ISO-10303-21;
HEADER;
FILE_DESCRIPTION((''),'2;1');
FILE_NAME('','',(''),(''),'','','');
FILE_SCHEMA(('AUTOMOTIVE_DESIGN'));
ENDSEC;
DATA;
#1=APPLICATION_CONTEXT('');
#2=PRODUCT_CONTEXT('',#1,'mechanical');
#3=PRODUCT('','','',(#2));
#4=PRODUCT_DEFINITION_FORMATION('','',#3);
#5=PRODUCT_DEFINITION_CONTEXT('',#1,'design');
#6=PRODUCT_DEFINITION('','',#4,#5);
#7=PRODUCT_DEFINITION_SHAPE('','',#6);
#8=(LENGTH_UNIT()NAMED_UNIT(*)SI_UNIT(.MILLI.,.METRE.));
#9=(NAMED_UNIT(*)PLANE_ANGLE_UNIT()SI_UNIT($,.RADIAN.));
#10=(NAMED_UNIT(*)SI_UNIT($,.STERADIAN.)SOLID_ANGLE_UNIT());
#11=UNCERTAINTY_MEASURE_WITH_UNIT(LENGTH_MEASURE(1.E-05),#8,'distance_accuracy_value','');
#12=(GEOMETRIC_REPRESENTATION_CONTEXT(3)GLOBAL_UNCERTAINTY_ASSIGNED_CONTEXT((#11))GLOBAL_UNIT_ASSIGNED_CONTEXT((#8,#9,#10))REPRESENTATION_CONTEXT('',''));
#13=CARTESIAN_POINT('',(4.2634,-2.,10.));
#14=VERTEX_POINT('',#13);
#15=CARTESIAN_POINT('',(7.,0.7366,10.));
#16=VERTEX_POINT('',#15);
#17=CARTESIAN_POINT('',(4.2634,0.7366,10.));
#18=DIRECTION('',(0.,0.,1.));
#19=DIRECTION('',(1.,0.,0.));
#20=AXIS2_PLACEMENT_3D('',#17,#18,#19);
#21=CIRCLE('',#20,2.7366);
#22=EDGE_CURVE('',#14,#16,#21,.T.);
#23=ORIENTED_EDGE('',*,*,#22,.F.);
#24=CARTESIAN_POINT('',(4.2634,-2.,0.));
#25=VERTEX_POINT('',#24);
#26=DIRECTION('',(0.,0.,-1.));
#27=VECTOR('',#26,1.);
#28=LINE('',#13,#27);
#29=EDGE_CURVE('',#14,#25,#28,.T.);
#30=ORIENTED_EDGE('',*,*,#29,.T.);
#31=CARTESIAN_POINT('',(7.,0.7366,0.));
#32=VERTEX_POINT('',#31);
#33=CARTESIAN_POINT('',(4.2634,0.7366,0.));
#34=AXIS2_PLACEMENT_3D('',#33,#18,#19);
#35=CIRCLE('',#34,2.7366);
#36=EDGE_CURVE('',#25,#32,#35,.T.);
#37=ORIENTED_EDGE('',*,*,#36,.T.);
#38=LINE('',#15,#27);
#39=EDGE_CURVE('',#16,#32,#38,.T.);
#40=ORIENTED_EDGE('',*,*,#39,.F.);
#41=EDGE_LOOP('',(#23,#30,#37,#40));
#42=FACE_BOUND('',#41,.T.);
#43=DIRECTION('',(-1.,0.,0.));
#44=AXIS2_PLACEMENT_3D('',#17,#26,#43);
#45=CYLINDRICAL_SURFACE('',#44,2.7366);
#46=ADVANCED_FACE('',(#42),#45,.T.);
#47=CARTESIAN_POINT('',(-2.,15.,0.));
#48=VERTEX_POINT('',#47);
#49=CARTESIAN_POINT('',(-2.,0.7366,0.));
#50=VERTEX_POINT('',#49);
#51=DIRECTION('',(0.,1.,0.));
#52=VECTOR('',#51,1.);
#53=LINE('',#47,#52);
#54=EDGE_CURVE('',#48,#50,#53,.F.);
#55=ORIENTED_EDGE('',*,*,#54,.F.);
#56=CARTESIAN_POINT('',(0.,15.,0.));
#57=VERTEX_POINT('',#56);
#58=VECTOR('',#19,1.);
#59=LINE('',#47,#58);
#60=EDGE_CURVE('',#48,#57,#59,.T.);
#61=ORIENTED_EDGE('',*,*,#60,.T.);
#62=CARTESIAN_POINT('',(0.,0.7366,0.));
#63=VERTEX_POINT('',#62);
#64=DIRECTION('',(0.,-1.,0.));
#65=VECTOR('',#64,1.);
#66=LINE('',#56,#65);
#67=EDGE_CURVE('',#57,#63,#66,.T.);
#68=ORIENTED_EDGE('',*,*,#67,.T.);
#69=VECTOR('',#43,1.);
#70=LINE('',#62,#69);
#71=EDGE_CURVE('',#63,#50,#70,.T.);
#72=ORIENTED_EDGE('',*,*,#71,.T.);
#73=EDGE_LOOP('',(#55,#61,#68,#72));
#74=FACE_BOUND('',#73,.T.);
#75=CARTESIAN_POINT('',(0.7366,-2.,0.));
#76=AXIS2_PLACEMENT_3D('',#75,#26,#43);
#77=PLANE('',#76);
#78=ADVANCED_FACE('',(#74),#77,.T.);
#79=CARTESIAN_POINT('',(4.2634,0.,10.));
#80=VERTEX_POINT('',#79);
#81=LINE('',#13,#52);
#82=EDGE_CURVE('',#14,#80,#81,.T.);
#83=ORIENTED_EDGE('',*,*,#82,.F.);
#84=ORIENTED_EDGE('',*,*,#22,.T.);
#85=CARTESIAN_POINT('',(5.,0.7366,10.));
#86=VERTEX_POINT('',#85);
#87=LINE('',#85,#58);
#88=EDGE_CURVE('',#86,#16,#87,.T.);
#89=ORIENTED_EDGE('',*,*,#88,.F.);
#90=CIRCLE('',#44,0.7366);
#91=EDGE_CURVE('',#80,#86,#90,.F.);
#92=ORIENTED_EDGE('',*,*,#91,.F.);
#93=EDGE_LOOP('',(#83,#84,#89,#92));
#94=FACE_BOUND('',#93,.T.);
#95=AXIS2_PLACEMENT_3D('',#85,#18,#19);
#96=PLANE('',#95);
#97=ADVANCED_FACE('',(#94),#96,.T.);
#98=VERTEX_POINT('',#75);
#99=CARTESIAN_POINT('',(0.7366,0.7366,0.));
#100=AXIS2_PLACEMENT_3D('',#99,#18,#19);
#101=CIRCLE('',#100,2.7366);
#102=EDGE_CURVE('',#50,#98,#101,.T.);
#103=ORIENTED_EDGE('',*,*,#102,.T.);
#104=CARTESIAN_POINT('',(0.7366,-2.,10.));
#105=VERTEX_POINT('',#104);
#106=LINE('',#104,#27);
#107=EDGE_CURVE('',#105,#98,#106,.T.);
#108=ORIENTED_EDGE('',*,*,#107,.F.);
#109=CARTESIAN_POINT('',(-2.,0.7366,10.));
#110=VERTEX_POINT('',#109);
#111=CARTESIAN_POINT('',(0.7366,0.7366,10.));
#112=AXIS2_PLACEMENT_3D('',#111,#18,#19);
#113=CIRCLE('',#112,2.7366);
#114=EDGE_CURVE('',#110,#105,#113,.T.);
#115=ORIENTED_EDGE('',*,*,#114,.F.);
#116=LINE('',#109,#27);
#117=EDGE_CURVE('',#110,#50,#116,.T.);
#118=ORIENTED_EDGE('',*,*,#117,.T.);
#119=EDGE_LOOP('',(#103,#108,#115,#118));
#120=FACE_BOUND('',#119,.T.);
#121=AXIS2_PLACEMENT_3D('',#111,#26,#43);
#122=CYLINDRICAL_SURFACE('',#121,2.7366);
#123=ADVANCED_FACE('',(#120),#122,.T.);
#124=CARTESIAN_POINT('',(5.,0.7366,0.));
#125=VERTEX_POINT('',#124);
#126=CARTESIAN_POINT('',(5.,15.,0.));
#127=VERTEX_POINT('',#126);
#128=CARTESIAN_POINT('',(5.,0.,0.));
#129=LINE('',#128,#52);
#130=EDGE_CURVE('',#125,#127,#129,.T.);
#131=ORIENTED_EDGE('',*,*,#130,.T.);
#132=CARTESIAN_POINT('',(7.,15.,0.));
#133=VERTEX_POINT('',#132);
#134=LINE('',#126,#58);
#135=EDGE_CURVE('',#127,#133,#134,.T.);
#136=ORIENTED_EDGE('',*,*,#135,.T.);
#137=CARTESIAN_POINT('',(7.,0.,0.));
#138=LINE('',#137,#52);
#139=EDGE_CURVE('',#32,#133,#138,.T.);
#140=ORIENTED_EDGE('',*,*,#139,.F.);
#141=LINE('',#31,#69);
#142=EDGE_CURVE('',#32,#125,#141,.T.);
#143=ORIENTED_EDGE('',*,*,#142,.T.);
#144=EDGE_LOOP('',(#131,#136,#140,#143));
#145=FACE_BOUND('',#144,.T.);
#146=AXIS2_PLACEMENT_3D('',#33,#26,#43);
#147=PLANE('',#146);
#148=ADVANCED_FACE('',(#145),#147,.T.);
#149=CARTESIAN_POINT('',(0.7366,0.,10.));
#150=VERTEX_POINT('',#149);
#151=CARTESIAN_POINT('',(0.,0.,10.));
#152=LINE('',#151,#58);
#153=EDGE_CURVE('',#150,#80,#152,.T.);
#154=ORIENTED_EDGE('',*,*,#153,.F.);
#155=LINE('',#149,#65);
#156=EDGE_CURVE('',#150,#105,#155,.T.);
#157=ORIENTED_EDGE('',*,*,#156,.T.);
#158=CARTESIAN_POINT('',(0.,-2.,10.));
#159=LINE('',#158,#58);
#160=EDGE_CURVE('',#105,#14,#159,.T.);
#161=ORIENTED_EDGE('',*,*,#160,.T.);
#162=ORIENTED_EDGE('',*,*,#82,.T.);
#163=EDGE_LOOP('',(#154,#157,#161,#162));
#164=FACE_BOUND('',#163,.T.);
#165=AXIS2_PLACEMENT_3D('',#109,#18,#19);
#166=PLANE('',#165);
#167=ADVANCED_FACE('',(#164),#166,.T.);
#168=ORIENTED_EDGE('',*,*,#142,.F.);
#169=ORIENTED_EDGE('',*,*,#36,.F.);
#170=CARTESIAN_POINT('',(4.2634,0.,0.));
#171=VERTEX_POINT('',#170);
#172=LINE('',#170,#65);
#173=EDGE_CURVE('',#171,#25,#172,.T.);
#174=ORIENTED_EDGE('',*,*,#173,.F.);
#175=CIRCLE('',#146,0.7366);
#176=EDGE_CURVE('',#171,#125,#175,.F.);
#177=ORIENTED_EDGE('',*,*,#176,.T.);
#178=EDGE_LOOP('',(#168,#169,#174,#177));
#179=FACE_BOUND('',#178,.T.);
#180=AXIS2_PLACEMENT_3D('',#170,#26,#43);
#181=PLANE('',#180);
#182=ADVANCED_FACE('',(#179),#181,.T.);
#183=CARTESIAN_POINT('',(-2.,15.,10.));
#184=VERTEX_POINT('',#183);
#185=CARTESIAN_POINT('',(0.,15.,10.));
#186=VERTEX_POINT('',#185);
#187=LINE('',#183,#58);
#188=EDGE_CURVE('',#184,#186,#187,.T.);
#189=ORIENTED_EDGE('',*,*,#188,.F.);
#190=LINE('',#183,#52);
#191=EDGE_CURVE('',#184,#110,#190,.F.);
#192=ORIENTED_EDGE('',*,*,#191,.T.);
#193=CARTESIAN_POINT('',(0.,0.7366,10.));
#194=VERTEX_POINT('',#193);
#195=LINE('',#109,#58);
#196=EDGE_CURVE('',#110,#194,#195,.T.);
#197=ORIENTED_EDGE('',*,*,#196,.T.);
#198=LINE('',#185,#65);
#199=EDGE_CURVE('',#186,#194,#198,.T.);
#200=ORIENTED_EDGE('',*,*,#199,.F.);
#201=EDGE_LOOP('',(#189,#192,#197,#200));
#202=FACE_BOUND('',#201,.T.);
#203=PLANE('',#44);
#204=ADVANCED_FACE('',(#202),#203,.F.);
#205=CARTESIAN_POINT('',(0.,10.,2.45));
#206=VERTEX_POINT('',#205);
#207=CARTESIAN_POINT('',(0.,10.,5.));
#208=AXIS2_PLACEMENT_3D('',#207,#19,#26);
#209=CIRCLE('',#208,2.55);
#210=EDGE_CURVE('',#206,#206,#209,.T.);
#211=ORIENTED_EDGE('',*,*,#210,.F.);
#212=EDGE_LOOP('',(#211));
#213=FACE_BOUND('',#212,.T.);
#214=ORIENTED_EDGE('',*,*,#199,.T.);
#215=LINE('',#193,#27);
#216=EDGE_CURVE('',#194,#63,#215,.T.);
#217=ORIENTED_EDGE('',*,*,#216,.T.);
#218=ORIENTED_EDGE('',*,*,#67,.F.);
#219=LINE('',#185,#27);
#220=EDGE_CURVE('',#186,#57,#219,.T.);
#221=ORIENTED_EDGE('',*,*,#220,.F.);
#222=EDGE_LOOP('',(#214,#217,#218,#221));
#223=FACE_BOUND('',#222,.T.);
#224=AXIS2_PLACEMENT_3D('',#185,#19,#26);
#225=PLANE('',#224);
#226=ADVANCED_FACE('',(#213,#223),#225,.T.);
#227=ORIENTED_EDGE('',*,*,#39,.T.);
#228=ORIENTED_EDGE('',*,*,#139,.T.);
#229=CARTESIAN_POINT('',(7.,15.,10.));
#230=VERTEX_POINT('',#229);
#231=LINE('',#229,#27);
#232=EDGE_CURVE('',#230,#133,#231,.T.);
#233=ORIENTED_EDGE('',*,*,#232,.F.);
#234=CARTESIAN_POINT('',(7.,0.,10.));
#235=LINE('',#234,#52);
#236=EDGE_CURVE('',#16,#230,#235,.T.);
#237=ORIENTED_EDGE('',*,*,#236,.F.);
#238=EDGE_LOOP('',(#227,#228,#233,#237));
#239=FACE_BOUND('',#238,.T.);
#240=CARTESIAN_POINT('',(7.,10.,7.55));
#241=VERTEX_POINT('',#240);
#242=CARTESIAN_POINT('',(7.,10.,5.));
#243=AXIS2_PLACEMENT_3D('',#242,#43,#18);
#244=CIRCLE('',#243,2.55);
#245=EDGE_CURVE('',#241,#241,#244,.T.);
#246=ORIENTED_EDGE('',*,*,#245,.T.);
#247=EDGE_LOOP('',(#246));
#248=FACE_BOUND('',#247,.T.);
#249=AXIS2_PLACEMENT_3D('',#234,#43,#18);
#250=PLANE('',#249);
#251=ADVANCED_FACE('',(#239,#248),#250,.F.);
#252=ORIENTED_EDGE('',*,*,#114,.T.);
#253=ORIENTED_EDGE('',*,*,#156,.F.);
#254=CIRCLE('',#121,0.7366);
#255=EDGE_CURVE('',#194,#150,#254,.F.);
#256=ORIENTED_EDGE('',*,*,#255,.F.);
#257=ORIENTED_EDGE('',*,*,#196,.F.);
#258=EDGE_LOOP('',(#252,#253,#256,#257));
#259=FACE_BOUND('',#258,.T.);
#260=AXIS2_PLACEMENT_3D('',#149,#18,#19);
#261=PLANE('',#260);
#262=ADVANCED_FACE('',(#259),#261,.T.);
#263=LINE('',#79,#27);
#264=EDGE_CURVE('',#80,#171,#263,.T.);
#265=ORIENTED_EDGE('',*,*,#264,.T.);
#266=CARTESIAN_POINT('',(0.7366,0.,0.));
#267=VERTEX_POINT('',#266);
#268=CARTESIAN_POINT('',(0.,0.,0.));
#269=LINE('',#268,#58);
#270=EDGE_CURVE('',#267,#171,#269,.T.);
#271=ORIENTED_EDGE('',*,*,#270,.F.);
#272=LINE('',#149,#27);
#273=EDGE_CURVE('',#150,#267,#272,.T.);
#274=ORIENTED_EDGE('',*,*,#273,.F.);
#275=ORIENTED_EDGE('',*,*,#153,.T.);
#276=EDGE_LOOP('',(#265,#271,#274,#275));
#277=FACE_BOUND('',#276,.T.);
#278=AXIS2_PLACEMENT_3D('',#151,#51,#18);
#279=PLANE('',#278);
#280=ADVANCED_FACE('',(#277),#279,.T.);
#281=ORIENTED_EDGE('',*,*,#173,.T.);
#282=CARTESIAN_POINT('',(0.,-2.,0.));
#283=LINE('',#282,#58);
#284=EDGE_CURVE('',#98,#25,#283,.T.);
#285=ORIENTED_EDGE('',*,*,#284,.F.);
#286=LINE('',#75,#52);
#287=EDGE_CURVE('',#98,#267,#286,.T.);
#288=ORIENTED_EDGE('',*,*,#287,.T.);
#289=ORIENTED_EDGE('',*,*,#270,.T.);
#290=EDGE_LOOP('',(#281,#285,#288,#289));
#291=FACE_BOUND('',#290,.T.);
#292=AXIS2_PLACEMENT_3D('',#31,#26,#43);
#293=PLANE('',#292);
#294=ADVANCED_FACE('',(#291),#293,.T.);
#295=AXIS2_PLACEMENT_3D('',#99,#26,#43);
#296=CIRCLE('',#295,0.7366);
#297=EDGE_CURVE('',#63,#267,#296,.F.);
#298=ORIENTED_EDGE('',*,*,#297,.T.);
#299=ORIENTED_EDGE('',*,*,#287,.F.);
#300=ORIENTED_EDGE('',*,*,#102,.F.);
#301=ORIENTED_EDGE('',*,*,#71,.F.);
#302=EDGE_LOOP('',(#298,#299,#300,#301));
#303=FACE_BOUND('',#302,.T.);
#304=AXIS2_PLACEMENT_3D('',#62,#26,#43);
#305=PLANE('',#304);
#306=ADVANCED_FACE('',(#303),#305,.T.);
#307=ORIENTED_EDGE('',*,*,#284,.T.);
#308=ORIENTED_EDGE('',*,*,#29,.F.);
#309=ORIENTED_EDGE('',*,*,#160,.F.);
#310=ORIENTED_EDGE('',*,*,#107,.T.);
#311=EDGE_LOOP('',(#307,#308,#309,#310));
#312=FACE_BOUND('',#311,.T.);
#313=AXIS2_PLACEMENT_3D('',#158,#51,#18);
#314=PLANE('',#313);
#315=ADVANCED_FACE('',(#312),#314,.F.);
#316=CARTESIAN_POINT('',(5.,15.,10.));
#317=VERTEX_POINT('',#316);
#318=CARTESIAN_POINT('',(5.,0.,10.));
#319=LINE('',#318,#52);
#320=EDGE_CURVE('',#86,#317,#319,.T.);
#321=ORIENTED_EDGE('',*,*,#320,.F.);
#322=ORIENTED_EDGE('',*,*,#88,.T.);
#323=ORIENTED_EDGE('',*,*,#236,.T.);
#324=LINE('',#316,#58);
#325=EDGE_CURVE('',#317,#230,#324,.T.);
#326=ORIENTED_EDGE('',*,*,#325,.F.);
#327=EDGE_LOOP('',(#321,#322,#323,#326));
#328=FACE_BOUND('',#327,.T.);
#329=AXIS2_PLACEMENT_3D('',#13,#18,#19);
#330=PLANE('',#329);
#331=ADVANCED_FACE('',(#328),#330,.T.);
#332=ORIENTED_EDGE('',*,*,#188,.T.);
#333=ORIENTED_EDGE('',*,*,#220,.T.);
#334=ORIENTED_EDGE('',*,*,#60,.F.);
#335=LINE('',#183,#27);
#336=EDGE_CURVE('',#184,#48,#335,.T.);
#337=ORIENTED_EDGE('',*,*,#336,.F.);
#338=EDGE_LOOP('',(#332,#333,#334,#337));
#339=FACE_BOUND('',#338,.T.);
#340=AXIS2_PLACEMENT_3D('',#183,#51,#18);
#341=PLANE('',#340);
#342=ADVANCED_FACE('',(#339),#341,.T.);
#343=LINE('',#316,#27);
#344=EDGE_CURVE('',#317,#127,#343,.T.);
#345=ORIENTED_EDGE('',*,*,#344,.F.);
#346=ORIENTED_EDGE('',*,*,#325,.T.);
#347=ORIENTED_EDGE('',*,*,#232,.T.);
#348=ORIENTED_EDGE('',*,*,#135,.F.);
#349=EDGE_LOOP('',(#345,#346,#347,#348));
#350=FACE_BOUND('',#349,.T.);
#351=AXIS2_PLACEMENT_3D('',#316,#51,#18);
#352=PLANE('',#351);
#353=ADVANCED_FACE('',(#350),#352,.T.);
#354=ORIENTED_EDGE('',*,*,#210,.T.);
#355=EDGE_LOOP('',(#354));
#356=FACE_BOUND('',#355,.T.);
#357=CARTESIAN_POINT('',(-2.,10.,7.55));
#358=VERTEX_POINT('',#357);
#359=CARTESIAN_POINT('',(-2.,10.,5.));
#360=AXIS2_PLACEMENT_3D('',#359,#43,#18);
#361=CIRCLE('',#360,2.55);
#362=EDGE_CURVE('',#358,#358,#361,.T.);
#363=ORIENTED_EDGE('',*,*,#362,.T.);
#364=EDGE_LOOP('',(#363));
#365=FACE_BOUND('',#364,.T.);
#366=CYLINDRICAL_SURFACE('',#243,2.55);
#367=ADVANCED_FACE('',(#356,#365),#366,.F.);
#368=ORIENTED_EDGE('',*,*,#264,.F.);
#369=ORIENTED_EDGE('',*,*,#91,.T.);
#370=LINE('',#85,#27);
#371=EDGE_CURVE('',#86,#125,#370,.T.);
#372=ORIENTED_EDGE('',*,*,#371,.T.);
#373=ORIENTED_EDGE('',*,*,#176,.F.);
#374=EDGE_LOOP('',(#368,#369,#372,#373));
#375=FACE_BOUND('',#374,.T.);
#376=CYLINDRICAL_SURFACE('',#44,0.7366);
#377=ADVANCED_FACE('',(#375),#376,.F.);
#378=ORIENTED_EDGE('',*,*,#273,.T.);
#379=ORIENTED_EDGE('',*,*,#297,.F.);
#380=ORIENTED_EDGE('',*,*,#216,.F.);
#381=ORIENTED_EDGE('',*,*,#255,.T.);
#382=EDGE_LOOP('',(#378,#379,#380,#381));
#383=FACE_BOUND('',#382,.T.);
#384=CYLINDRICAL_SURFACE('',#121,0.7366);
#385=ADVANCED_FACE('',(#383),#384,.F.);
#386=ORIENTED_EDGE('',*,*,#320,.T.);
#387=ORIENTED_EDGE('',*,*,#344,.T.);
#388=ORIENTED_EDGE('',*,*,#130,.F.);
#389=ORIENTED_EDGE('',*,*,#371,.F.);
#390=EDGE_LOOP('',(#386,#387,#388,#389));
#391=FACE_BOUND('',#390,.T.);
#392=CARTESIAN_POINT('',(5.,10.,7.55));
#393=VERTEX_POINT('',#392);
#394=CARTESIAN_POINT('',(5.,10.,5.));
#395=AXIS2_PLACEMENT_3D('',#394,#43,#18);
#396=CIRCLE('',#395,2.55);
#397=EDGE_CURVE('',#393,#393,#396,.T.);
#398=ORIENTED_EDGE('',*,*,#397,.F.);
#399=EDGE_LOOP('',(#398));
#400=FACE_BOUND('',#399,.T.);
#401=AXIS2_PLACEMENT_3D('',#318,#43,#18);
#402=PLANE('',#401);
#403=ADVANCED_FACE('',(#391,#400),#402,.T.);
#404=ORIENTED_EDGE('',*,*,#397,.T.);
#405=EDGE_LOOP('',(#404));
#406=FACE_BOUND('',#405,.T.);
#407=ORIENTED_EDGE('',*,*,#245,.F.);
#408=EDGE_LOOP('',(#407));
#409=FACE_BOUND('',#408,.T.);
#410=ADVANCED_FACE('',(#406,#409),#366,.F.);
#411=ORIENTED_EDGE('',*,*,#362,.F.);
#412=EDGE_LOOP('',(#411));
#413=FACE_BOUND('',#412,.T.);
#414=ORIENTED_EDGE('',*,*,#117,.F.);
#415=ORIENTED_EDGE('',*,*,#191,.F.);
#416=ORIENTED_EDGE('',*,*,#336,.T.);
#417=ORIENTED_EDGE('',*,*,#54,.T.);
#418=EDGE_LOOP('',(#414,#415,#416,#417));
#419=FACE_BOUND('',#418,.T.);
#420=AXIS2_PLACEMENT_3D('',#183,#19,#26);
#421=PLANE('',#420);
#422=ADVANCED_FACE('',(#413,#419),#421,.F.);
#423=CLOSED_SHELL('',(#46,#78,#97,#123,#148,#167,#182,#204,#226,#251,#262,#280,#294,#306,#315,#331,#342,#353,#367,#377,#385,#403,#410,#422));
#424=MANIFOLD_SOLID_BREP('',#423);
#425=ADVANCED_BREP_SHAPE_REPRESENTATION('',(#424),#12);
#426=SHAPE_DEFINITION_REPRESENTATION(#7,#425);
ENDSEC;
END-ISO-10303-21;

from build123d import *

# Parameters (mm, degrees)
BASE_FLANGE1_DEPTH = 10
SKETCH6_R          = 2.55
CUT_EXTRUDE1_DEPTH = 21.14944168


# Sheet-metal steps are written as plain solids
with BuildPart() as part:
    # Sketch1 → Base-Flange1 (new body)
    with BuildSketch(Plane.XY):
        with BuildLine():
            Line((0, 15), (0, 0.7366))
            ThreePointArc((0, 0.7366), (0.215745145, 0.215745145), (0.7366, 0))
            Line((0.7366, 0), (4.2634, 0))
            ThreePointArc((4.2634, 0), (4.784254855, 0.215745145), (5, 0.7366))
            Line((5, 0.7366), (5, 15))
            Line((5, 15), (7, 15))
            Line((7, 15), (7, 0.7366))
            ThreePointArc((7, 0.7366), (6.198468417, -1.198468417), (4.2634, -2))
            Line((4.2634, -2), (0.7366, -2))
            ThreePointArc((0.7366, -2), (-1.198468417, -1.198468417), (-2, 0.7366))
            Line((-2, 0.7366), (-2, 15))
            Line((-2, 15), (0, 15))
        make_face()
    extrude(amount=BASE_FLANGE1_DEPTH)

    # Sketch6 → Cut-Extrude1 (cut, through all)
    with BuildSketch(Plane.ZY.offset(2)):
        with Locations((5, 10)):
            Circle(SKETCH6_R)
    extrude(amount=-CUT_EXTRUDE1_DEPTH, mode=Mode.SUBTRACT)


solid = part.part
